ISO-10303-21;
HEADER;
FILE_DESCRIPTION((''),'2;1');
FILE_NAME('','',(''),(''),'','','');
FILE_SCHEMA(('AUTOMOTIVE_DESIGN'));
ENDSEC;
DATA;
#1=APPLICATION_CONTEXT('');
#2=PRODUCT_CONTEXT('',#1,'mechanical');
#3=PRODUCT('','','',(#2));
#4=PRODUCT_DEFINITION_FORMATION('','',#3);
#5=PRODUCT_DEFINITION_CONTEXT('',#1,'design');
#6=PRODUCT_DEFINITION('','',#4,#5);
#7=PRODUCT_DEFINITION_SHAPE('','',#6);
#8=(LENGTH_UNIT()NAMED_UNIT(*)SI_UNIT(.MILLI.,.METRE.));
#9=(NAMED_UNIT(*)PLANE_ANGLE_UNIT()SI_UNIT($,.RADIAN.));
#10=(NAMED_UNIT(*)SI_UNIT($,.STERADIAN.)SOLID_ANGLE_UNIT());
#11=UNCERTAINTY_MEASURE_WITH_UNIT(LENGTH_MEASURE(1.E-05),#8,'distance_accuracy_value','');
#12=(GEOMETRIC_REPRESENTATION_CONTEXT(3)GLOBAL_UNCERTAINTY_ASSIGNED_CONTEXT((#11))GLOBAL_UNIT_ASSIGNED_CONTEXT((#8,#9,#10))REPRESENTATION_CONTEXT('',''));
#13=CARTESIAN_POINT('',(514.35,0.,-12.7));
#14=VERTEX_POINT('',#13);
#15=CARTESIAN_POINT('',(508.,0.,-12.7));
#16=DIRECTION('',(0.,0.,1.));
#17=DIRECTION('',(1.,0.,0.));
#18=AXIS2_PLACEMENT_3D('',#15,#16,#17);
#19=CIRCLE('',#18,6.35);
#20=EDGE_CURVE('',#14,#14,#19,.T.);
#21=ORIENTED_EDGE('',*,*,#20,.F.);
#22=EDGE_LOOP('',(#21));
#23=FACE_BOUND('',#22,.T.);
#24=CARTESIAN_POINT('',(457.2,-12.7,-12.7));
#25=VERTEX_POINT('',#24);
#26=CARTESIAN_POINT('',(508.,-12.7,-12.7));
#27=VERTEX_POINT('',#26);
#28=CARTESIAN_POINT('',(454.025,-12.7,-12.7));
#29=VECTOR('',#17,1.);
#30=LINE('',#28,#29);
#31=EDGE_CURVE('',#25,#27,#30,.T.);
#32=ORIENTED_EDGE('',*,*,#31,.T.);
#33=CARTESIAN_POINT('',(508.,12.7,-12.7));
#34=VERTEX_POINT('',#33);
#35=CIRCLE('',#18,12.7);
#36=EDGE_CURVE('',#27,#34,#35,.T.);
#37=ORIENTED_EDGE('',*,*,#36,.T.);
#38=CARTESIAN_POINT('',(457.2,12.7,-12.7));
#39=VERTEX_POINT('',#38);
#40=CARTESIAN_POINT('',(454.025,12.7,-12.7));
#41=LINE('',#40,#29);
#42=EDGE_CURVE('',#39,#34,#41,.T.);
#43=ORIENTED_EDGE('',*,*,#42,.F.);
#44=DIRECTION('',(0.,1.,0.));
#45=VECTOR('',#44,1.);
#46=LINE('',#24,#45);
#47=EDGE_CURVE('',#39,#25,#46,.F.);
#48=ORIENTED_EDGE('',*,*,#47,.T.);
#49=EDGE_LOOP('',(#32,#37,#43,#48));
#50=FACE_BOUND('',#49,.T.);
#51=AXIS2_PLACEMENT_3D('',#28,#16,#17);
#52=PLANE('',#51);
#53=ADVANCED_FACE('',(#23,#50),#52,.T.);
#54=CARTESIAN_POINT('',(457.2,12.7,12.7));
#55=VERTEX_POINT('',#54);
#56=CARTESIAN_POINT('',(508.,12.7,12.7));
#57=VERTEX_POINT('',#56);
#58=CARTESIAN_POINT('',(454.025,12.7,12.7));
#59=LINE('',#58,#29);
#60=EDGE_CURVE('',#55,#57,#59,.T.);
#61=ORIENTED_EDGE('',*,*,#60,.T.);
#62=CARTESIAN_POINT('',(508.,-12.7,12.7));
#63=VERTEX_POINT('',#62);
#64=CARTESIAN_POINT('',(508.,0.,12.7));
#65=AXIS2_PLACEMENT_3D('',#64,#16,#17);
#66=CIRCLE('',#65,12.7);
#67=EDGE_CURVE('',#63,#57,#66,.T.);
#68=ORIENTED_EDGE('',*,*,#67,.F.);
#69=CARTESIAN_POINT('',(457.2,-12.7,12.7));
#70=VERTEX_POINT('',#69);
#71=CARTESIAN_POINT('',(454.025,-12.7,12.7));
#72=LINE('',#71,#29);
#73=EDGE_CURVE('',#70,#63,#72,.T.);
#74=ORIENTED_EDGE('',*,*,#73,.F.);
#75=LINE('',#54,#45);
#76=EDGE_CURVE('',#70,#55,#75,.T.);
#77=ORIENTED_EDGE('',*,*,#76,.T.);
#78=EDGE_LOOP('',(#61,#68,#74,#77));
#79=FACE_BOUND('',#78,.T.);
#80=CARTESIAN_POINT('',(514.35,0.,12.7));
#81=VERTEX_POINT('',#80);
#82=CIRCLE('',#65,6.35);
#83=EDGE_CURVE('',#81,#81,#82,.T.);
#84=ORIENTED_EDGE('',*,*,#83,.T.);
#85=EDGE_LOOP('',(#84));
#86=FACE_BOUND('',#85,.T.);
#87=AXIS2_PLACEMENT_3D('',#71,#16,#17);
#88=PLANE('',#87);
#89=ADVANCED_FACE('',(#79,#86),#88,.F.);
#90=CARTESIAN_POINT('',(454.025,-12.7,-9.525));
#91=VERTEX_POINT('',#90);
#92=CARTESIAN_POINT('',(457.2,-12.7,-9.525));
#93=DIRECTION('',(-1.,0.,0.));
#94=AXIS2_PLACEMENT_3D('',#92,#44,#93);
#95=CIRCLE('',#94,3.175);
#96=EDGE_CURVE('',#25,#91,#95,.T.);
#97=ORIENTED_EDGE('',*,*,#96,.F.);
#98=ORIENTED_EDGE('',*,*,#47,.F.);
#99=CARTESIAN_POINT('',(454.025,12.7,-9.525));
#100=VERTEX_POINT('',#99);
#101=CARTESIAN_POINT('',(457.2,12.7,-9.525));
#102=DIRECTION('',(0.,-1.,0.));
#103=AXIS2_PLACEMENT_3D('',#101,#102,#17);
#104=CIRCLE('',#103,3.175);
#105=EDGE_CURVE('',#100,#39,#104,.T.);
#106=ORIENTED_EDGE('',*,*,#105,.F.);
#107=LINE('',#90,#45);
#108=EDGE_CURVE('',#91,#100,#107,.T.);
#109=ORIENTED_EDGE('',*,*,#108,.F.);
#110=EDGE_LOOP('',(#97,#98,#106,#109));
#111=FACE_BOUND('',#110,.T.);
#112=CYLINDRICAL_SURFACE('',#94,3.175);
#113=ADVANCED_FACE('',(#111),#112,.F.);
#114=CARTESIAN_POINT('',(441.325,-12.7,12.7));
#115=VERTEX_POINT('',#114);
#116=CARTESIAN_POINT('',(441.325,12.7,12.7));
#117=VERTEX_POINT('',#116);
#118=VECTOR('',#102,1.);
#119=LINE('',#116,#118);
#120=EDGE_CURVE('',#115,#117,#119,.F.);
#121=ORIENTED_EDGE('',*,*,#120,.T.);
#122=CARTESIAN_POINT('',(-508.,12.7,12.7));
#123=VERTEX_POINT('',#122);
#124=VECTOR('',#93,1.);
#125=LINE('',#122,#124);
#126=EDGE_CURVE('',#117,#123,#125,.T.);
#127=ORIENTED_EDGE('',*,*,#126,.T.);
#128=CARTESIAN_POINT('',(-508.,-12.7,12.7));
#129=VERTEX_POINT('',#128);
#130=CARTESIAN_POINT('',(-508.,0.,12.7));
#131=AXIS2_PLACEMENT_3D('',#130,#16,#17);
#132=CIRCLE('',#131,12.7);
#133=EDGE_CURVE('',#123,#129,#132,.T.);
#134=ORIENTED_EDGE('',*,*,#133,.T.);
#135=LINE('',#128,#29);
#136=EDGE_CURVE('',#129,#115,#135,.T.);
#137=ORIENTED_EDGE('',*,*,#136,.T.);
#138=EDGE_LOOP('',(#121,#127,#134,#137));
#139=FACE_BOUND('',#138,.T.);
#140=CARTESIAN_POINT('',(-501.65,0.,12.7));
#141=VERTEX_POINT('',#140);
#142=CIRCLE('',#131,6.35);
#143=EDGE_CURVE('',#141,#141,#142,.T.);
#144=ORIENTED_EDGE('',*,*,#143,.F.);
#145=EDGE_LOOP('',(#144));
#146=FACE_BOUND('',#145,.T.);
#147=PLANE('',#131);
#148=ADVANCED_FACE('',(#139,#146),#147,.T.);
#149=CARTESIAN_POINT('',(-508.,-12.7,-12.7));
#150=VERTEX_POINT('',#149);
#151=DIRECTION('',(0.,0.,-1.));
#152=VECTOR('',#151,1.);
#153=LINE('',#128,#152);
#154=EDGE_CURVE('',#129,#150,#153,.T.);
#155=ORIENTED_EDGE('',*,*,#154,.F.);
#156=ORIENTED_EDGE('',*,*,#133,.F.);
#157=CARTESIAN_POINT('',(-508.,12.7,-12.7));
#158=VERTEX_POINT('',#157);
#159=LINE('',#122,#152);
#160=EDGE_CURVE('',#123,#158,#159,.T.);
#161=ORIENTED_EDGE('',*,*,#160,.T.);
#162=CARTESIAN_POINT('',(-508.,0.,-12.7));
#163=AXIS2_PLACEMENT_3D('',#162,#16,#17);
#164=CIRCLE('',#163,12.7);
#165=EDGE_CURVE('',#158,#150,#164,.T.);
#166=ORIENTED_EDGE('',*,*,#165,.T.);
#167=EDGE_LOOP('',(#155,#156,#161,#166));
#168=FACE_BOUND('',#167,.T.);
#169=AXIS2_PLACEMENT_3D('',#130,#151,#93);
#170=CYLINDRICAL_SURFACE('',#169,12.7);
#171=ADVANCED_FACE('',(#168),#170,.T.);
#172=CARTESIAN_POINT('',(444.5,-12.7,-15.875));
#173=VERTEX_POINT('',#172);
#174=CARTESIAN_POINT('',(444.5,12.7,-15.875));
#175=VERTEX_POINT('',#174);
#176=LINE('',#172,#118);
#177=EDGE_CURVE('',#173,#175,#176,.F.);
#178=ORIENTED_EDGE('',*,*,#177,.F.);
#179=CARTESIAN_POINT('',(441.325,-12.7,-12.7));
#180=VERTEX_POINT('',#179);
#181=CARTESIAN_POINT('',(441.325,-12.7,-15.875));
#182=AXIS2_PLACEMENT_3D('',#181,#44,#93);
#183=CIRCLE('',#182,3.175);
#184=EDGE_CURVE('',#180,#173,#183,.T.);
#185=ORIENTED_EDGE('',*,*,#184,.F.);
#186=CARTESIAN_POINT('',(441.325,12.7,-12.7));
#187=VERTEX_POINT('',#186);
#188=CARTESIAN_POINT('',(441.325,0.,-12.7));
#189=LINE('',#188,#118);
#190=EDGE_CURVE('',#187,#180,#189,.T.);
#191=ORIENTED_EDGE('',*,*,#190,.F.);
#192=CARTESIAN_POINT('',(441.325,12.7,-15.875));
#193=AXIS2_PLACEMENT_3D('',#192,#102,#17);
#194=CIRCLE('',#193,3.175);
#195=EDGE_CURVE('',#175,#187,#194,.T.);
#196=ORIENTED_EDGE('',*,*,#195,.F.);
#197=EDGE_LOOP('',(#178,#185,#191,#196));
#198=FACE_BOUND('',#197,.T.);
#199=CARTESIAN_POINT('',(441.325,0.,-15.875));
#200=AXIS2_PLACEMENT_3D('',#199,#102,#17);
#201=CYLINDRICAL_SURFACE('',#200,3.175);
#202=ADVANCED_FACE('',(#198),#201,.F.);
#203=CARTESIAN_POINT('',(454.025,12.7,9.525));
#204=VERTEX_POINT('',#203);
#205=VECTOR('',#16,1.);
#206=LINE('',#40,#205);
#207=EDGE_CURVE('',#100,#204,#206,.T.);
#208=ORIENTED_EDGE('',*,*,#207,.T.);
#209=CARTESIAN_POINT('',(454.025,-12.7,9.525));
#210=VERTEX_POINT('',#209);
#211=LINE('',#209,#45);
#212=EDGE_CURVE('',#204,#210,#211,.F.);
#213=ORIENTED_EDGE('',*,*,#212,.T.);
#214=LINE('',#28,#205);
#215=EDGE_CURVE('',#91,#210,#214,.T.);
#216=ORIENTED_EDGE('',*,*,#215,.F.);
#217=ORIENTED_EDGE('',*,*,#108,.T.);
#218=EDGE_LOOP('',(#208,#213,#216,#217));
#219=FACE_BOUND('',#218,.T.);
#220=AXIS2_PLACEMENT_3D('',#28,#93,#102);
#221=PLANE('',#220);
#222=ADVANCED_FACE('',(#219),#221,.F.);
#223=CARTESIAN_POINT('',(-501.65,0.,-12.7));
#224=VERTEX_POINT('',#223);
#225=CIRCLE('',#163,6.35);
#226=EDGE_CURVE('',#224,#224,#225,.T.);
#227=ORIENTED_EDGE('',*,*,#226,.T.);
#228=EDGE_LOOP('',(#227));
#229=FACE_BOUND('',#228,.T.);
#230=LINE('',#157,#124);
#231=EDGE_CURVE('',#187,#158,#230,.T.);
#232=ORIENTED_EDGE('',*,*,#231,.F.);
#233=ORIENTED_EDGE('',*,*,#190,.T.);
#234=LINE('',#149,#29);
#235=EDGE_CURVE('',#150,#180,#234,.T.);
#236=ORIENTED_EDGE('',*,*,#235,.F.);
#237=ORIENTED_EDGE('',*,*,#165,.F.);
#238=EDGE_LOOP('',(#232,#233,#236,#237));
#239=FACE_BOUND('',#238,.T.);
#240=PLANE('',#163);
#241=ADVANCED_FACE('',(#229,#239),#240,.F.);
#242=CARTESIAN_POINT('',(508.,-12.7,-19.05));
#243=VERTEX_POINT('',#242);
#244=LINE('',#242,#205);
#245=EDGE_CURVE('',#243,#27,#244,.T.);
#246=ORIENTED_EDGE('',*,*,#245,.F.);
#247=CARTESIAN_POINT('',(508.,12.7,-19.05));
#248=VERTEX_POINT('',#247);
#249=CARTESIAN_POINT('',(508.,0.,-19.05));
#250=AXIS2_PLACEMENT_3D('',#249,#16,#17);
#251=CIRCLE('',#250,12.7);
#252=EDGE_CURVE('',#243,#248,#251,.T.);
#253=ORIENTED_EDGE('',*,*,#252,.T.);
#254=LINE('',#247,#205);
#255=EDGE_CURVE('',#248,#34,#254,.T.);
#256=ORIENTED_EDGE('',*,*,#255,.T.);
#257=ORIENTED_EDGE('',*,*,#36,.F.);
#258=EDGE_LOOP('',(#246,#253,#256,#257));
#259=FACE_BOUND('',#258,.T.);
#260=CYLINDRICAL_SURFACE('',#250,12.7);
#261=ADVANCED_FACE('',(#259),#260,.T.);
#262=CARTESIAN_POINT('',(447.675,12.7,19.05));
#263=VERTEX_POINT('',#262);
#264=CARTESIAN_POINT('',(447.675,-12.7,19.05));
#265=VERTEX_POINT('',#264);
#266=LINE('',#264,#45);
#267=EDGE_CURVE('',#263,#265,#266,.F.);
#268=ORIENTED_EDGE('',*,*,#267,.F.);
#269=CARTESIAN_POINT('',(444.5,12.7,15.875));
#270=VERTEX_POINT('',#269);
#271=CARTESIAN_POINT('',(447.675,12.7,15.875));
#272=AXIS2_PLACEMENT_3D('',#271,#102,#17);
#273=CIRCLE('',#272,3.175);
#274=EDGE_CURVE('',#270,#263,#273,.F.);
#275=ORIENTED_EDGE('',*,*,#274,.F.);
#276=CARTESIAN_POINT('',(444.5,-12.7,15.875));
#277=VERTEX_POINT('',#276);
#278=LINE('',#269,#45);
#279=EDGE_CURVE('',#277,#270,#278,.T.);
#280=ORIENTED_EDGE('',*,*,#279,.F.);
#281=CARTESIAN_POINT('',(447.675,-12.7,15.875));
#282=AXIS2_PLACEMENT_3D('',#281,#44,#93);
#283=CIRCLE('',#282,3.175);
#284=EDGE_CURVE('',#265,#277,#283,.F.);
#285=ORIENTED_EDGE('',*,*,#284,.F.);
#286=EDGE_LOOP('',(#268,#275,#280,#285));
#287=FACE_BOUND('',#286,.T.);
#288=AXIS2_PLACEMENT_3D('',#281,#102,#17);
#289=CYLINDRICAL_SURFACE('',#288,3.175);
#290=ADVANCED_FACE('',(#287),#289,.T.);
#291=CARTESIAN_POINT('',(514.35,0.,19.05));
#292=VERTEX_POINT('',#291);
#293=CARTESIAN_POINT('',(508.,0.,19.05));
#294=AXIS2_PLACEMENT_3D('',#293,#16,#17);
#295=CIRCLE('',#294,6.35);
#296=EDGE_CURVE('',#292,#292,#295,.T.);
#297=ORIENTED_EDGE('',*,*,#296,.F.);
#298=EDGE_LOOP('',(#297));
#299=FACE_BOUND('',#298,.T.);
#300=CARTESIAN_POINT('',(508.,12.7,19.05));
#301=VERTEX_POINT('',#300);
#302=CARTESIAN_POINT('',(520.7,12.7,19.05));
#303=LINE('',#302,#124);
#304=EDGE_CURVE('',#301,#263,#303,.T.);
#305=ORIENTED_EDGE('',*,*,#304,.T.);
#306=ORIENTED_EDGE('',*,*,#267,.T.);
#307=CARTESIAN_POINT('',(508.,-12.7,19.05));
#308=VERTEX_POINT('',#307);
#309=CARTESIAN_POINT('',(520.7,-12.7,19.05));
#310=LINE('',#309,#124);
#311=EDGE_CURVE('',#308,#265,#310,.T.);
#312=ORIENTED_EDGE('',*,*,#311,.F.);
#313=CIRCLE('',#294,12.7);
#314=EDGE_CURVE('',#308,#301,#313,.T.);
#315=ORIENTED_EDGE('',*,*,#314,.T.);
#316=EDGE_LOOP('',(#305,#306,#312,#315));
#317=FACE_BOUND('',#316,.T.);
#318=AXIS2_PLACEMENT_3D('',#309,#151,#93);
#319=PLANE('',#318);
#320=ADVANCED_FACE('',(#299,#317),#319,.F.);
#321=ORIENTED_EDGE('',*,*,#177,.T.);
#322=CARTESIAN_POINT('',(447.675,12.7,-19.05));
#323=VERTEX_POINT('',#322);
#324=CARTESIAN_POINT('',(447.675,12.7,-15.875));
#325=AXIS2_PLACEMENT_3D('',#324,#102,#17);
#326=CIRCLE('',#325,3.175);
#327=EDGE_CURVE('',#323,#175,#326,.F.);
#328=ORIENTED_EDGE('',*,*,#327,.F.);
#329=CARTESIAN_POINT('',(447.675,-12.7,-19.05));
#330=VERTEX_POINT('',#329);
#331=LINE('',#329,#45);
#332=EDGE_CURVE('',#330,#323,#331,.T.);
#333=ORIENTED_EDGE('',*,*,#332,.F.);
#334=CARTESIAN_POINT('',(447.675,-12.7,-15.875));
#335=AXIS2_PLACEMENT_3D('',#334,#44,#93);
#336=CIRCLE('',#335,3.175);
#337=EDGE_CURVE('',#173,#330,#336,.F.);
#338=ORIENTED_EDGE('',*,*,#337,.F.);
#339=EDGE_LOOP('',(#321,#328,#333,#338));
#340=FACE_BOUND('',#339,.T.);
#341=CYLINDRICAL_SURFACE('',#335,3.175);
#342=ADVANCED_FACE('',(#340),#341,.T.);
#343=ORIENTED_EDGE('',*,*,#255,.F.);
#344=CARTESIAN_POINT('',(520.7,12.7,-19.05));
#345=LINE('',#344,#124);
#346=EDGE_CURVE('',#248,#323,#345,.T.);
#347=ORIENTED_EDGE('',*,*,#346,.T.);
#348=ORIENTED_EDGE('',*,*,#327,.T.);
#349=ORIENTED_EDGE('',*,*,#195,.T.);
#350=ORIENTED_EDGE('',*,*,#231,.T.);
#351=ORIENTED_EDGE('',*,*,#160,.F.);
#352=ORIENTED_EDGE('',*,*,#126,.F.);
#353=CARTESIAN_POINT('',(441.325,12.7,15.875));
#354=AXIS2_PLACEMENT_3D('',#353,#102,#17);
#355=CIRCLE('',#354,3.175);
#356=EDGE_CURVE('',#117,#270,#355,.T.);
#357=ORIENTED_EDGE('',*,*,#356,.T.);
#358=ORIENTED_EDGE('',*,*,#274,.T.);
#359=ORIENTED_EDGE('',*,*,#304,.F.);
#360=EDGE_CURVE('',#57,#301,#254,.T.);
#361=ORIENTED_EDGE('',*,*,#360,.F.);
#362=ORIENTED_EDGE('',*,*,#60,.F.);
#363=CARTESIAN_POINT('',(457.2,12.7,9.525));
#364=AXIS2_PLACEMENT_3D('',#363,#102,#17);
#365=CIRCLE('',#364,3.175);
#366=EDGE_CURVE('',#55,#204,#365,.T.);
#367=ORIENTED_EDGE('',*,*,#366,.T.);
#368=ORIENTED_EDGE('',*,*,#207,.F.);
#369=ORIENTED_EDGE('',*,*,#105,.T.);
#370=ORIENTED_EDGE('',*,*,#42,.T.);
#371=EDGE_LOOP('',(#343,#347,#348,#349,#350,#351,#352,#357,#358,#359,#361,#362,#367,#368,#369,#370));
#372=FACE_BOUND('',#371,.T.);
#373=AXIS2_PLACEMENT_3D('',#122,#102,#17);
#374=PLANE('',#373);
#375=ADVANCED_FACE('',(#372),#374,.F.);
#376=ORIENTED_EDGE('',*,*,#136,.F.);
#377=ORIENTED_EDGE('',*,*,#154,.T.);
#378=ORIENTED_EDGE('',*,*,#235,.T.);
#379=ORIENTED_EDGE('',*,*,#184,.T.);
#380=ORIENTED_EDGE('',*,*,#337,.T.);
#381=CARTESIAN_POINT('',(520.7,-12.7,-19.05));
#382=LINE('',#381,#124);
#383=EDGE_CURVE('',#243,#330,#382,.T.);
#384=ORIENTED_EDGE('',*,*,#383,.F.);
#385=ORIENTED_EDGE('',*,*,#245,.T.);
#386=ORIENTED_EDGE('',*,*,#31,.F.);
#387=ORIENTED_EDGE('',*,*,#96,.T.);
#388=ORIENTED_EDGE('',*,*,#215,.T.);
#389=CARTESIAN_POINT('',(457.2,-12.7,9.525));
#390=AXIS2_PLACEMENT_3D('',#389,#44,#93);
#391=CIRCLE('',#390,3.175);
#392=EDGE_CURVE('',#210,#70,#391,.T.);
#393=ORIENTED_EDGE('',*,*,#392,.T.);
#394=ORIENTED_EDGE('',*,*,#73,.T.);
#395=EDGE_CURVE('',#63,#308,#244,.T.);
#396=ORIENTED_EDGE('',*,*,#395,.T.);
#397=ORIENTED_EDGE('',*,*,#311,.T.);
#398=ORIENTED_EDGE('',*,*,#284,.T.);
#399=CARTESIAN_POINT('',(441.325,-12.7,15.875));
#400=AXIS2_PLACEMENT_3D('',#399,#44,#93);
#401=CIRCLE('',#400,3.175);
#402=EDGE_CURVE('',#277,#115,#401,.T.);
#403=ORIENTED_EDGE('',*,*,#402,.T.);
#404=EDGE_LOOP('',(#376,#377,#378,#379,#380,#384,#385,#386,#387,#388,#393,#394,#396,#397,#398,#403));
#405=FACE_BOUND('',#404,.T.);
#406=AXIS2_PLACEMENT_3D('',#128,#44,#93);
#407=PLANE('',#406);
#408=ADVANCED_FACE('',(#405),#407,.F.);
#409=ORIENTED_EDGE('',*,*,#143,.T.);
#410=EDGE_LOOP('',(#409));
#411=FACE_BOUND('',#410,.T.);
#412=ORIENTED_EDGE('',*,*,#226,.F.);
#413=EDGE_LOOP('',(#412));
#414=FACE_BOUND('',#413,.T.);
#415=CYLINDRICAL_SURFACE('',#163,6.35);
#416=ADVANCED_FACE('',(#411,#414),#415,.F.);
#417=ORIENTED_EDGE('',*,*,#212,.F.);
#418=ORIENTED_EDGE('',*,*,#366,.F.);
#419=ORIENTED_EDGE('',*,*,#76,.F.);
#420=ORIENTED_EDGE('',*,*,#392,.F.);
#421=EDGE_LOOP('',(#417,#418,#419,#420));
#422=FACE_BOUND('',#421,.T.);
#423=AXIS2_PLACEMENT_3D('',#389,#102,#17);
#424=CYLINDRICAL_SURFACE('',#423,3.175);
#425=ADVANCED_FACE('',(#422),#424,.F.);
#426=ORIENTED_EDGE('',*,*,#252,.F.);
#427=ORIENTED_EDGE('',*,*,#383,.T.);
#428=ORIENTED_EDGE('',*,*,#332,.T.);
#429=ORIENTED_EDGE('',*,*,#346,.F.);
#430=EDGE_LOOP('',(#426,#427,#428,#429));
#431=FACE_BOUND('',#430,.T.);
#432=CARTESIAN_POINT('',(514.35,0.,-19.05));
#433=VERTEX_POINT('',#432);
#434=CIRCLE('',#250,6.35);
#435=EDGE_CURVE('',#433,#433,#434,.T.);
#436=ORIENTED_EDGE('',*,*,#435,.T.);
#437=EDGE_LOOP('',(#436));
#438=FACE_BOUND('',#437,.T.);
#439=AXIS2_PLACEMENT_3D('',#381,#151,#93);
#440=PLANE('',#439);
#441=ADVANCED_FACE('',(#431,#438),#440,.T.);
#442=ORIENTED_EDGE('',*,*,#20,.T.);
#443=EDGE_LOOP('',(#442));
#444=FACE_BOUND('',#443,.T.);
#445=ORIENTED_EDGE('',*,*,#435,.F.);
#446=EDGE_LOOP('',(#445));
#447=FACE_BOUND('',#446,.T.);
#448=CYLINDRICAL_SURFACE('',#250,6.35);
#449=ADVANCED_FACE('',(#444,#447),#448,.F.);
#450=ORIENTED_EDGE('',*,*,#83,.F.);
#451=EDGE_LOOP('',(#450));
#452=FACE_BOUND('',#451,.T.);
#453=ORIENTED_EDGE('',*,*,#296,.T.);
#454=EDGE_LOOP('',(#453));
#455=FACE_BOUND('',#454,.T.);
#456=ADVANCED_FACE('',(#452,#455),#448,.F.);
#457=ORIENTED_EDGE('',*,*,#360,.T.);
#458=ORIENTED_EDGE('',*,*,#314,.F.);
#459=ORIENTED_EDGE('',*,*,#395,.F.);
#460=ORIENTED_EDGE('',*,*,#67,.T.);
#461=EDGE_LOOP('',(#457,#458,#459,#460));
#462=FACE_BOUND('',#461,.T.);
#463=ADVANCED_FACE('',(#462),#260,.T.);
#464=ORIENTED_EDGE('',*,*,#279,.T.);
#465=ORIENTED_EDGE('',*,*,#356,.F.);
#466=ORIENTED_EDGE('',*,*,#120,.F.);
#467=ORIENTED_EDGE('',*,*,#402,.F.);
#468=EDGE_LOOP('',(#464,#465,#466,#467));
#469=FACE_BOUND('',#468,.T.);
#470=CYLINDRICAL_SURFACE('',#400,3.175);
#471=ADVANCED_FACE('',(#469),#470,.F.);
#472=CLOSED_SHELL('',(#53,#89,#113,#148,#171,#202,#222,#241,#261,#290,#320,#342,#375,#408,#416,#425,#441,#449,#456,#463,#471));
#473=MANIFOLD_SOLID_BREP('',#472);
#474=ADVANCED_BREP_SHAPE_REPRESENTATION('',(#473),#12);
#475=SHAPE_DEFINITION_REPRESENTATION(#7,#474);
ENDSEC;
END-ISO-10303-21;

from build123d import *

# Parameters (mm, degrees)
BOSS_EXTRUDE1_DEPTH = 12.7
SKETCH2_R           = 6.35
CUT_EXTRUDE1_DEPTH  = 522.473815258
SKETCH3_W           = 76.2
SKETCH3_H           = 38.1
BOSS_EXTRUDE4_DEPTH = 25.4
SKETCH6_W           = 66.675
SKETCH6_H           = 25.4
CUT_EXTRUDE3_DEPTH  = 522.667089723
SKETCH4_R           = 6.35
CUT_EXTRUDE2_DEPTH  = 523.246483952
FILLET3_R           = 3.175


with BuildPart() as part:
    # Sketch1 → Boss-Extrude1 (new, symmetric)
    with BuildSketch(Plane.XY):
        with BuildLine():
            Line((-508, 12.7), (508, 12.7))
            ThreePointArc((508, 12.7), (520.7, 0), (508, -12.7))
            Line((508, -12.7), (-508, -12.7))
            ThreePointArc((-508, -12.7), (-520.7, 0), (-508, 12.7))
        make_face()
    extrude(amount=BOSS_EXTRUDE1_DEPTH, both=True)

    # Sketch2 → Cut-Extrude1 (cut, through all)
    with BuildSketch(Plane.XY.offset(12.7)):
        with Locations((-508, 0)):
            Circle(SKETCH2_R)
        with Locations((508, 0)):
            Circle(SKETCH2_R)
    extrude(amount=-CUT_EXTRUDE1_DEPTH, mode=Mode.SUBTRACT)

    # Sketch3 → Boss-Extrude4 (add, through all)
    with BuildSketch(Plane(origin=(0, 12.7, 0), x_dir=(1, 0, 0), z_dir=(0, 1, 0))):
        with Locations((482.6, 0)):
            Rectangle(SKETCH3_W, SKETCH3_H)
    extrude(amount=-BOSS_EXTRUDE4_DEPTH)

    # Sketch6 → Cut-Extrude3 (cut, through all)
    with BuildSketch(Plane(origin=(0, 12.7, 0), x_dir=(1, 0, 0), z_dir=(0, 1, 0))):
        with Locations((487.3625, 0)):
            Rectangle(SKETCH6_W, SKETCH6_H)
    extrude(amount=-CUT_EXTRUDE3_DEPTH, mode=Mode.SUBTRACT)

    # Sketch4 → Cut-Extrude2 (cut, through all)
    with BuildSketch(Plane.XY.offset(19.05)):
        with BuildLine():
            Line((520.7, 0), (520.7, 12.7))
            Line((520.7, 12.7), (508, 12.7))
            ThreePointArc((508, 12.7), (516.980256121, 8.980256121), (520.7, 0))
        make_face()
        with BuildLine():
            Line((520.7, -12.7), (520.7, 0))
            ThreePointArc((520.7, 0), (516.980256121, -8.980256121), (508, -12.7))
            Line((508, -12.7), (520.7, -12.7))
        make_face()
        with Locations((508, 0)):
            Circle(SKETCH4_R)
    extrude(amount=-CUT_EXTRUDE2_DEPTH, mode=Mode.SUBTRACT)

    # Fillet3
    fillet3_edges = [part.edges().sort_by_distance(p)[0] for p in [
        (454.025, 0, 12.7),
        (444.5, 0, -19.05),
        (444.5, 0, -12.7),
        (444.5, 0, 12.7),
        (454.025, 0, -12.7),
        (444.5, 0, 19.05),
    ]]
    fillet(fillet3_edges, radius=FILLET3_R - 0.0001)  # a hair under: the kernel refuses the full size


solid = part.part
